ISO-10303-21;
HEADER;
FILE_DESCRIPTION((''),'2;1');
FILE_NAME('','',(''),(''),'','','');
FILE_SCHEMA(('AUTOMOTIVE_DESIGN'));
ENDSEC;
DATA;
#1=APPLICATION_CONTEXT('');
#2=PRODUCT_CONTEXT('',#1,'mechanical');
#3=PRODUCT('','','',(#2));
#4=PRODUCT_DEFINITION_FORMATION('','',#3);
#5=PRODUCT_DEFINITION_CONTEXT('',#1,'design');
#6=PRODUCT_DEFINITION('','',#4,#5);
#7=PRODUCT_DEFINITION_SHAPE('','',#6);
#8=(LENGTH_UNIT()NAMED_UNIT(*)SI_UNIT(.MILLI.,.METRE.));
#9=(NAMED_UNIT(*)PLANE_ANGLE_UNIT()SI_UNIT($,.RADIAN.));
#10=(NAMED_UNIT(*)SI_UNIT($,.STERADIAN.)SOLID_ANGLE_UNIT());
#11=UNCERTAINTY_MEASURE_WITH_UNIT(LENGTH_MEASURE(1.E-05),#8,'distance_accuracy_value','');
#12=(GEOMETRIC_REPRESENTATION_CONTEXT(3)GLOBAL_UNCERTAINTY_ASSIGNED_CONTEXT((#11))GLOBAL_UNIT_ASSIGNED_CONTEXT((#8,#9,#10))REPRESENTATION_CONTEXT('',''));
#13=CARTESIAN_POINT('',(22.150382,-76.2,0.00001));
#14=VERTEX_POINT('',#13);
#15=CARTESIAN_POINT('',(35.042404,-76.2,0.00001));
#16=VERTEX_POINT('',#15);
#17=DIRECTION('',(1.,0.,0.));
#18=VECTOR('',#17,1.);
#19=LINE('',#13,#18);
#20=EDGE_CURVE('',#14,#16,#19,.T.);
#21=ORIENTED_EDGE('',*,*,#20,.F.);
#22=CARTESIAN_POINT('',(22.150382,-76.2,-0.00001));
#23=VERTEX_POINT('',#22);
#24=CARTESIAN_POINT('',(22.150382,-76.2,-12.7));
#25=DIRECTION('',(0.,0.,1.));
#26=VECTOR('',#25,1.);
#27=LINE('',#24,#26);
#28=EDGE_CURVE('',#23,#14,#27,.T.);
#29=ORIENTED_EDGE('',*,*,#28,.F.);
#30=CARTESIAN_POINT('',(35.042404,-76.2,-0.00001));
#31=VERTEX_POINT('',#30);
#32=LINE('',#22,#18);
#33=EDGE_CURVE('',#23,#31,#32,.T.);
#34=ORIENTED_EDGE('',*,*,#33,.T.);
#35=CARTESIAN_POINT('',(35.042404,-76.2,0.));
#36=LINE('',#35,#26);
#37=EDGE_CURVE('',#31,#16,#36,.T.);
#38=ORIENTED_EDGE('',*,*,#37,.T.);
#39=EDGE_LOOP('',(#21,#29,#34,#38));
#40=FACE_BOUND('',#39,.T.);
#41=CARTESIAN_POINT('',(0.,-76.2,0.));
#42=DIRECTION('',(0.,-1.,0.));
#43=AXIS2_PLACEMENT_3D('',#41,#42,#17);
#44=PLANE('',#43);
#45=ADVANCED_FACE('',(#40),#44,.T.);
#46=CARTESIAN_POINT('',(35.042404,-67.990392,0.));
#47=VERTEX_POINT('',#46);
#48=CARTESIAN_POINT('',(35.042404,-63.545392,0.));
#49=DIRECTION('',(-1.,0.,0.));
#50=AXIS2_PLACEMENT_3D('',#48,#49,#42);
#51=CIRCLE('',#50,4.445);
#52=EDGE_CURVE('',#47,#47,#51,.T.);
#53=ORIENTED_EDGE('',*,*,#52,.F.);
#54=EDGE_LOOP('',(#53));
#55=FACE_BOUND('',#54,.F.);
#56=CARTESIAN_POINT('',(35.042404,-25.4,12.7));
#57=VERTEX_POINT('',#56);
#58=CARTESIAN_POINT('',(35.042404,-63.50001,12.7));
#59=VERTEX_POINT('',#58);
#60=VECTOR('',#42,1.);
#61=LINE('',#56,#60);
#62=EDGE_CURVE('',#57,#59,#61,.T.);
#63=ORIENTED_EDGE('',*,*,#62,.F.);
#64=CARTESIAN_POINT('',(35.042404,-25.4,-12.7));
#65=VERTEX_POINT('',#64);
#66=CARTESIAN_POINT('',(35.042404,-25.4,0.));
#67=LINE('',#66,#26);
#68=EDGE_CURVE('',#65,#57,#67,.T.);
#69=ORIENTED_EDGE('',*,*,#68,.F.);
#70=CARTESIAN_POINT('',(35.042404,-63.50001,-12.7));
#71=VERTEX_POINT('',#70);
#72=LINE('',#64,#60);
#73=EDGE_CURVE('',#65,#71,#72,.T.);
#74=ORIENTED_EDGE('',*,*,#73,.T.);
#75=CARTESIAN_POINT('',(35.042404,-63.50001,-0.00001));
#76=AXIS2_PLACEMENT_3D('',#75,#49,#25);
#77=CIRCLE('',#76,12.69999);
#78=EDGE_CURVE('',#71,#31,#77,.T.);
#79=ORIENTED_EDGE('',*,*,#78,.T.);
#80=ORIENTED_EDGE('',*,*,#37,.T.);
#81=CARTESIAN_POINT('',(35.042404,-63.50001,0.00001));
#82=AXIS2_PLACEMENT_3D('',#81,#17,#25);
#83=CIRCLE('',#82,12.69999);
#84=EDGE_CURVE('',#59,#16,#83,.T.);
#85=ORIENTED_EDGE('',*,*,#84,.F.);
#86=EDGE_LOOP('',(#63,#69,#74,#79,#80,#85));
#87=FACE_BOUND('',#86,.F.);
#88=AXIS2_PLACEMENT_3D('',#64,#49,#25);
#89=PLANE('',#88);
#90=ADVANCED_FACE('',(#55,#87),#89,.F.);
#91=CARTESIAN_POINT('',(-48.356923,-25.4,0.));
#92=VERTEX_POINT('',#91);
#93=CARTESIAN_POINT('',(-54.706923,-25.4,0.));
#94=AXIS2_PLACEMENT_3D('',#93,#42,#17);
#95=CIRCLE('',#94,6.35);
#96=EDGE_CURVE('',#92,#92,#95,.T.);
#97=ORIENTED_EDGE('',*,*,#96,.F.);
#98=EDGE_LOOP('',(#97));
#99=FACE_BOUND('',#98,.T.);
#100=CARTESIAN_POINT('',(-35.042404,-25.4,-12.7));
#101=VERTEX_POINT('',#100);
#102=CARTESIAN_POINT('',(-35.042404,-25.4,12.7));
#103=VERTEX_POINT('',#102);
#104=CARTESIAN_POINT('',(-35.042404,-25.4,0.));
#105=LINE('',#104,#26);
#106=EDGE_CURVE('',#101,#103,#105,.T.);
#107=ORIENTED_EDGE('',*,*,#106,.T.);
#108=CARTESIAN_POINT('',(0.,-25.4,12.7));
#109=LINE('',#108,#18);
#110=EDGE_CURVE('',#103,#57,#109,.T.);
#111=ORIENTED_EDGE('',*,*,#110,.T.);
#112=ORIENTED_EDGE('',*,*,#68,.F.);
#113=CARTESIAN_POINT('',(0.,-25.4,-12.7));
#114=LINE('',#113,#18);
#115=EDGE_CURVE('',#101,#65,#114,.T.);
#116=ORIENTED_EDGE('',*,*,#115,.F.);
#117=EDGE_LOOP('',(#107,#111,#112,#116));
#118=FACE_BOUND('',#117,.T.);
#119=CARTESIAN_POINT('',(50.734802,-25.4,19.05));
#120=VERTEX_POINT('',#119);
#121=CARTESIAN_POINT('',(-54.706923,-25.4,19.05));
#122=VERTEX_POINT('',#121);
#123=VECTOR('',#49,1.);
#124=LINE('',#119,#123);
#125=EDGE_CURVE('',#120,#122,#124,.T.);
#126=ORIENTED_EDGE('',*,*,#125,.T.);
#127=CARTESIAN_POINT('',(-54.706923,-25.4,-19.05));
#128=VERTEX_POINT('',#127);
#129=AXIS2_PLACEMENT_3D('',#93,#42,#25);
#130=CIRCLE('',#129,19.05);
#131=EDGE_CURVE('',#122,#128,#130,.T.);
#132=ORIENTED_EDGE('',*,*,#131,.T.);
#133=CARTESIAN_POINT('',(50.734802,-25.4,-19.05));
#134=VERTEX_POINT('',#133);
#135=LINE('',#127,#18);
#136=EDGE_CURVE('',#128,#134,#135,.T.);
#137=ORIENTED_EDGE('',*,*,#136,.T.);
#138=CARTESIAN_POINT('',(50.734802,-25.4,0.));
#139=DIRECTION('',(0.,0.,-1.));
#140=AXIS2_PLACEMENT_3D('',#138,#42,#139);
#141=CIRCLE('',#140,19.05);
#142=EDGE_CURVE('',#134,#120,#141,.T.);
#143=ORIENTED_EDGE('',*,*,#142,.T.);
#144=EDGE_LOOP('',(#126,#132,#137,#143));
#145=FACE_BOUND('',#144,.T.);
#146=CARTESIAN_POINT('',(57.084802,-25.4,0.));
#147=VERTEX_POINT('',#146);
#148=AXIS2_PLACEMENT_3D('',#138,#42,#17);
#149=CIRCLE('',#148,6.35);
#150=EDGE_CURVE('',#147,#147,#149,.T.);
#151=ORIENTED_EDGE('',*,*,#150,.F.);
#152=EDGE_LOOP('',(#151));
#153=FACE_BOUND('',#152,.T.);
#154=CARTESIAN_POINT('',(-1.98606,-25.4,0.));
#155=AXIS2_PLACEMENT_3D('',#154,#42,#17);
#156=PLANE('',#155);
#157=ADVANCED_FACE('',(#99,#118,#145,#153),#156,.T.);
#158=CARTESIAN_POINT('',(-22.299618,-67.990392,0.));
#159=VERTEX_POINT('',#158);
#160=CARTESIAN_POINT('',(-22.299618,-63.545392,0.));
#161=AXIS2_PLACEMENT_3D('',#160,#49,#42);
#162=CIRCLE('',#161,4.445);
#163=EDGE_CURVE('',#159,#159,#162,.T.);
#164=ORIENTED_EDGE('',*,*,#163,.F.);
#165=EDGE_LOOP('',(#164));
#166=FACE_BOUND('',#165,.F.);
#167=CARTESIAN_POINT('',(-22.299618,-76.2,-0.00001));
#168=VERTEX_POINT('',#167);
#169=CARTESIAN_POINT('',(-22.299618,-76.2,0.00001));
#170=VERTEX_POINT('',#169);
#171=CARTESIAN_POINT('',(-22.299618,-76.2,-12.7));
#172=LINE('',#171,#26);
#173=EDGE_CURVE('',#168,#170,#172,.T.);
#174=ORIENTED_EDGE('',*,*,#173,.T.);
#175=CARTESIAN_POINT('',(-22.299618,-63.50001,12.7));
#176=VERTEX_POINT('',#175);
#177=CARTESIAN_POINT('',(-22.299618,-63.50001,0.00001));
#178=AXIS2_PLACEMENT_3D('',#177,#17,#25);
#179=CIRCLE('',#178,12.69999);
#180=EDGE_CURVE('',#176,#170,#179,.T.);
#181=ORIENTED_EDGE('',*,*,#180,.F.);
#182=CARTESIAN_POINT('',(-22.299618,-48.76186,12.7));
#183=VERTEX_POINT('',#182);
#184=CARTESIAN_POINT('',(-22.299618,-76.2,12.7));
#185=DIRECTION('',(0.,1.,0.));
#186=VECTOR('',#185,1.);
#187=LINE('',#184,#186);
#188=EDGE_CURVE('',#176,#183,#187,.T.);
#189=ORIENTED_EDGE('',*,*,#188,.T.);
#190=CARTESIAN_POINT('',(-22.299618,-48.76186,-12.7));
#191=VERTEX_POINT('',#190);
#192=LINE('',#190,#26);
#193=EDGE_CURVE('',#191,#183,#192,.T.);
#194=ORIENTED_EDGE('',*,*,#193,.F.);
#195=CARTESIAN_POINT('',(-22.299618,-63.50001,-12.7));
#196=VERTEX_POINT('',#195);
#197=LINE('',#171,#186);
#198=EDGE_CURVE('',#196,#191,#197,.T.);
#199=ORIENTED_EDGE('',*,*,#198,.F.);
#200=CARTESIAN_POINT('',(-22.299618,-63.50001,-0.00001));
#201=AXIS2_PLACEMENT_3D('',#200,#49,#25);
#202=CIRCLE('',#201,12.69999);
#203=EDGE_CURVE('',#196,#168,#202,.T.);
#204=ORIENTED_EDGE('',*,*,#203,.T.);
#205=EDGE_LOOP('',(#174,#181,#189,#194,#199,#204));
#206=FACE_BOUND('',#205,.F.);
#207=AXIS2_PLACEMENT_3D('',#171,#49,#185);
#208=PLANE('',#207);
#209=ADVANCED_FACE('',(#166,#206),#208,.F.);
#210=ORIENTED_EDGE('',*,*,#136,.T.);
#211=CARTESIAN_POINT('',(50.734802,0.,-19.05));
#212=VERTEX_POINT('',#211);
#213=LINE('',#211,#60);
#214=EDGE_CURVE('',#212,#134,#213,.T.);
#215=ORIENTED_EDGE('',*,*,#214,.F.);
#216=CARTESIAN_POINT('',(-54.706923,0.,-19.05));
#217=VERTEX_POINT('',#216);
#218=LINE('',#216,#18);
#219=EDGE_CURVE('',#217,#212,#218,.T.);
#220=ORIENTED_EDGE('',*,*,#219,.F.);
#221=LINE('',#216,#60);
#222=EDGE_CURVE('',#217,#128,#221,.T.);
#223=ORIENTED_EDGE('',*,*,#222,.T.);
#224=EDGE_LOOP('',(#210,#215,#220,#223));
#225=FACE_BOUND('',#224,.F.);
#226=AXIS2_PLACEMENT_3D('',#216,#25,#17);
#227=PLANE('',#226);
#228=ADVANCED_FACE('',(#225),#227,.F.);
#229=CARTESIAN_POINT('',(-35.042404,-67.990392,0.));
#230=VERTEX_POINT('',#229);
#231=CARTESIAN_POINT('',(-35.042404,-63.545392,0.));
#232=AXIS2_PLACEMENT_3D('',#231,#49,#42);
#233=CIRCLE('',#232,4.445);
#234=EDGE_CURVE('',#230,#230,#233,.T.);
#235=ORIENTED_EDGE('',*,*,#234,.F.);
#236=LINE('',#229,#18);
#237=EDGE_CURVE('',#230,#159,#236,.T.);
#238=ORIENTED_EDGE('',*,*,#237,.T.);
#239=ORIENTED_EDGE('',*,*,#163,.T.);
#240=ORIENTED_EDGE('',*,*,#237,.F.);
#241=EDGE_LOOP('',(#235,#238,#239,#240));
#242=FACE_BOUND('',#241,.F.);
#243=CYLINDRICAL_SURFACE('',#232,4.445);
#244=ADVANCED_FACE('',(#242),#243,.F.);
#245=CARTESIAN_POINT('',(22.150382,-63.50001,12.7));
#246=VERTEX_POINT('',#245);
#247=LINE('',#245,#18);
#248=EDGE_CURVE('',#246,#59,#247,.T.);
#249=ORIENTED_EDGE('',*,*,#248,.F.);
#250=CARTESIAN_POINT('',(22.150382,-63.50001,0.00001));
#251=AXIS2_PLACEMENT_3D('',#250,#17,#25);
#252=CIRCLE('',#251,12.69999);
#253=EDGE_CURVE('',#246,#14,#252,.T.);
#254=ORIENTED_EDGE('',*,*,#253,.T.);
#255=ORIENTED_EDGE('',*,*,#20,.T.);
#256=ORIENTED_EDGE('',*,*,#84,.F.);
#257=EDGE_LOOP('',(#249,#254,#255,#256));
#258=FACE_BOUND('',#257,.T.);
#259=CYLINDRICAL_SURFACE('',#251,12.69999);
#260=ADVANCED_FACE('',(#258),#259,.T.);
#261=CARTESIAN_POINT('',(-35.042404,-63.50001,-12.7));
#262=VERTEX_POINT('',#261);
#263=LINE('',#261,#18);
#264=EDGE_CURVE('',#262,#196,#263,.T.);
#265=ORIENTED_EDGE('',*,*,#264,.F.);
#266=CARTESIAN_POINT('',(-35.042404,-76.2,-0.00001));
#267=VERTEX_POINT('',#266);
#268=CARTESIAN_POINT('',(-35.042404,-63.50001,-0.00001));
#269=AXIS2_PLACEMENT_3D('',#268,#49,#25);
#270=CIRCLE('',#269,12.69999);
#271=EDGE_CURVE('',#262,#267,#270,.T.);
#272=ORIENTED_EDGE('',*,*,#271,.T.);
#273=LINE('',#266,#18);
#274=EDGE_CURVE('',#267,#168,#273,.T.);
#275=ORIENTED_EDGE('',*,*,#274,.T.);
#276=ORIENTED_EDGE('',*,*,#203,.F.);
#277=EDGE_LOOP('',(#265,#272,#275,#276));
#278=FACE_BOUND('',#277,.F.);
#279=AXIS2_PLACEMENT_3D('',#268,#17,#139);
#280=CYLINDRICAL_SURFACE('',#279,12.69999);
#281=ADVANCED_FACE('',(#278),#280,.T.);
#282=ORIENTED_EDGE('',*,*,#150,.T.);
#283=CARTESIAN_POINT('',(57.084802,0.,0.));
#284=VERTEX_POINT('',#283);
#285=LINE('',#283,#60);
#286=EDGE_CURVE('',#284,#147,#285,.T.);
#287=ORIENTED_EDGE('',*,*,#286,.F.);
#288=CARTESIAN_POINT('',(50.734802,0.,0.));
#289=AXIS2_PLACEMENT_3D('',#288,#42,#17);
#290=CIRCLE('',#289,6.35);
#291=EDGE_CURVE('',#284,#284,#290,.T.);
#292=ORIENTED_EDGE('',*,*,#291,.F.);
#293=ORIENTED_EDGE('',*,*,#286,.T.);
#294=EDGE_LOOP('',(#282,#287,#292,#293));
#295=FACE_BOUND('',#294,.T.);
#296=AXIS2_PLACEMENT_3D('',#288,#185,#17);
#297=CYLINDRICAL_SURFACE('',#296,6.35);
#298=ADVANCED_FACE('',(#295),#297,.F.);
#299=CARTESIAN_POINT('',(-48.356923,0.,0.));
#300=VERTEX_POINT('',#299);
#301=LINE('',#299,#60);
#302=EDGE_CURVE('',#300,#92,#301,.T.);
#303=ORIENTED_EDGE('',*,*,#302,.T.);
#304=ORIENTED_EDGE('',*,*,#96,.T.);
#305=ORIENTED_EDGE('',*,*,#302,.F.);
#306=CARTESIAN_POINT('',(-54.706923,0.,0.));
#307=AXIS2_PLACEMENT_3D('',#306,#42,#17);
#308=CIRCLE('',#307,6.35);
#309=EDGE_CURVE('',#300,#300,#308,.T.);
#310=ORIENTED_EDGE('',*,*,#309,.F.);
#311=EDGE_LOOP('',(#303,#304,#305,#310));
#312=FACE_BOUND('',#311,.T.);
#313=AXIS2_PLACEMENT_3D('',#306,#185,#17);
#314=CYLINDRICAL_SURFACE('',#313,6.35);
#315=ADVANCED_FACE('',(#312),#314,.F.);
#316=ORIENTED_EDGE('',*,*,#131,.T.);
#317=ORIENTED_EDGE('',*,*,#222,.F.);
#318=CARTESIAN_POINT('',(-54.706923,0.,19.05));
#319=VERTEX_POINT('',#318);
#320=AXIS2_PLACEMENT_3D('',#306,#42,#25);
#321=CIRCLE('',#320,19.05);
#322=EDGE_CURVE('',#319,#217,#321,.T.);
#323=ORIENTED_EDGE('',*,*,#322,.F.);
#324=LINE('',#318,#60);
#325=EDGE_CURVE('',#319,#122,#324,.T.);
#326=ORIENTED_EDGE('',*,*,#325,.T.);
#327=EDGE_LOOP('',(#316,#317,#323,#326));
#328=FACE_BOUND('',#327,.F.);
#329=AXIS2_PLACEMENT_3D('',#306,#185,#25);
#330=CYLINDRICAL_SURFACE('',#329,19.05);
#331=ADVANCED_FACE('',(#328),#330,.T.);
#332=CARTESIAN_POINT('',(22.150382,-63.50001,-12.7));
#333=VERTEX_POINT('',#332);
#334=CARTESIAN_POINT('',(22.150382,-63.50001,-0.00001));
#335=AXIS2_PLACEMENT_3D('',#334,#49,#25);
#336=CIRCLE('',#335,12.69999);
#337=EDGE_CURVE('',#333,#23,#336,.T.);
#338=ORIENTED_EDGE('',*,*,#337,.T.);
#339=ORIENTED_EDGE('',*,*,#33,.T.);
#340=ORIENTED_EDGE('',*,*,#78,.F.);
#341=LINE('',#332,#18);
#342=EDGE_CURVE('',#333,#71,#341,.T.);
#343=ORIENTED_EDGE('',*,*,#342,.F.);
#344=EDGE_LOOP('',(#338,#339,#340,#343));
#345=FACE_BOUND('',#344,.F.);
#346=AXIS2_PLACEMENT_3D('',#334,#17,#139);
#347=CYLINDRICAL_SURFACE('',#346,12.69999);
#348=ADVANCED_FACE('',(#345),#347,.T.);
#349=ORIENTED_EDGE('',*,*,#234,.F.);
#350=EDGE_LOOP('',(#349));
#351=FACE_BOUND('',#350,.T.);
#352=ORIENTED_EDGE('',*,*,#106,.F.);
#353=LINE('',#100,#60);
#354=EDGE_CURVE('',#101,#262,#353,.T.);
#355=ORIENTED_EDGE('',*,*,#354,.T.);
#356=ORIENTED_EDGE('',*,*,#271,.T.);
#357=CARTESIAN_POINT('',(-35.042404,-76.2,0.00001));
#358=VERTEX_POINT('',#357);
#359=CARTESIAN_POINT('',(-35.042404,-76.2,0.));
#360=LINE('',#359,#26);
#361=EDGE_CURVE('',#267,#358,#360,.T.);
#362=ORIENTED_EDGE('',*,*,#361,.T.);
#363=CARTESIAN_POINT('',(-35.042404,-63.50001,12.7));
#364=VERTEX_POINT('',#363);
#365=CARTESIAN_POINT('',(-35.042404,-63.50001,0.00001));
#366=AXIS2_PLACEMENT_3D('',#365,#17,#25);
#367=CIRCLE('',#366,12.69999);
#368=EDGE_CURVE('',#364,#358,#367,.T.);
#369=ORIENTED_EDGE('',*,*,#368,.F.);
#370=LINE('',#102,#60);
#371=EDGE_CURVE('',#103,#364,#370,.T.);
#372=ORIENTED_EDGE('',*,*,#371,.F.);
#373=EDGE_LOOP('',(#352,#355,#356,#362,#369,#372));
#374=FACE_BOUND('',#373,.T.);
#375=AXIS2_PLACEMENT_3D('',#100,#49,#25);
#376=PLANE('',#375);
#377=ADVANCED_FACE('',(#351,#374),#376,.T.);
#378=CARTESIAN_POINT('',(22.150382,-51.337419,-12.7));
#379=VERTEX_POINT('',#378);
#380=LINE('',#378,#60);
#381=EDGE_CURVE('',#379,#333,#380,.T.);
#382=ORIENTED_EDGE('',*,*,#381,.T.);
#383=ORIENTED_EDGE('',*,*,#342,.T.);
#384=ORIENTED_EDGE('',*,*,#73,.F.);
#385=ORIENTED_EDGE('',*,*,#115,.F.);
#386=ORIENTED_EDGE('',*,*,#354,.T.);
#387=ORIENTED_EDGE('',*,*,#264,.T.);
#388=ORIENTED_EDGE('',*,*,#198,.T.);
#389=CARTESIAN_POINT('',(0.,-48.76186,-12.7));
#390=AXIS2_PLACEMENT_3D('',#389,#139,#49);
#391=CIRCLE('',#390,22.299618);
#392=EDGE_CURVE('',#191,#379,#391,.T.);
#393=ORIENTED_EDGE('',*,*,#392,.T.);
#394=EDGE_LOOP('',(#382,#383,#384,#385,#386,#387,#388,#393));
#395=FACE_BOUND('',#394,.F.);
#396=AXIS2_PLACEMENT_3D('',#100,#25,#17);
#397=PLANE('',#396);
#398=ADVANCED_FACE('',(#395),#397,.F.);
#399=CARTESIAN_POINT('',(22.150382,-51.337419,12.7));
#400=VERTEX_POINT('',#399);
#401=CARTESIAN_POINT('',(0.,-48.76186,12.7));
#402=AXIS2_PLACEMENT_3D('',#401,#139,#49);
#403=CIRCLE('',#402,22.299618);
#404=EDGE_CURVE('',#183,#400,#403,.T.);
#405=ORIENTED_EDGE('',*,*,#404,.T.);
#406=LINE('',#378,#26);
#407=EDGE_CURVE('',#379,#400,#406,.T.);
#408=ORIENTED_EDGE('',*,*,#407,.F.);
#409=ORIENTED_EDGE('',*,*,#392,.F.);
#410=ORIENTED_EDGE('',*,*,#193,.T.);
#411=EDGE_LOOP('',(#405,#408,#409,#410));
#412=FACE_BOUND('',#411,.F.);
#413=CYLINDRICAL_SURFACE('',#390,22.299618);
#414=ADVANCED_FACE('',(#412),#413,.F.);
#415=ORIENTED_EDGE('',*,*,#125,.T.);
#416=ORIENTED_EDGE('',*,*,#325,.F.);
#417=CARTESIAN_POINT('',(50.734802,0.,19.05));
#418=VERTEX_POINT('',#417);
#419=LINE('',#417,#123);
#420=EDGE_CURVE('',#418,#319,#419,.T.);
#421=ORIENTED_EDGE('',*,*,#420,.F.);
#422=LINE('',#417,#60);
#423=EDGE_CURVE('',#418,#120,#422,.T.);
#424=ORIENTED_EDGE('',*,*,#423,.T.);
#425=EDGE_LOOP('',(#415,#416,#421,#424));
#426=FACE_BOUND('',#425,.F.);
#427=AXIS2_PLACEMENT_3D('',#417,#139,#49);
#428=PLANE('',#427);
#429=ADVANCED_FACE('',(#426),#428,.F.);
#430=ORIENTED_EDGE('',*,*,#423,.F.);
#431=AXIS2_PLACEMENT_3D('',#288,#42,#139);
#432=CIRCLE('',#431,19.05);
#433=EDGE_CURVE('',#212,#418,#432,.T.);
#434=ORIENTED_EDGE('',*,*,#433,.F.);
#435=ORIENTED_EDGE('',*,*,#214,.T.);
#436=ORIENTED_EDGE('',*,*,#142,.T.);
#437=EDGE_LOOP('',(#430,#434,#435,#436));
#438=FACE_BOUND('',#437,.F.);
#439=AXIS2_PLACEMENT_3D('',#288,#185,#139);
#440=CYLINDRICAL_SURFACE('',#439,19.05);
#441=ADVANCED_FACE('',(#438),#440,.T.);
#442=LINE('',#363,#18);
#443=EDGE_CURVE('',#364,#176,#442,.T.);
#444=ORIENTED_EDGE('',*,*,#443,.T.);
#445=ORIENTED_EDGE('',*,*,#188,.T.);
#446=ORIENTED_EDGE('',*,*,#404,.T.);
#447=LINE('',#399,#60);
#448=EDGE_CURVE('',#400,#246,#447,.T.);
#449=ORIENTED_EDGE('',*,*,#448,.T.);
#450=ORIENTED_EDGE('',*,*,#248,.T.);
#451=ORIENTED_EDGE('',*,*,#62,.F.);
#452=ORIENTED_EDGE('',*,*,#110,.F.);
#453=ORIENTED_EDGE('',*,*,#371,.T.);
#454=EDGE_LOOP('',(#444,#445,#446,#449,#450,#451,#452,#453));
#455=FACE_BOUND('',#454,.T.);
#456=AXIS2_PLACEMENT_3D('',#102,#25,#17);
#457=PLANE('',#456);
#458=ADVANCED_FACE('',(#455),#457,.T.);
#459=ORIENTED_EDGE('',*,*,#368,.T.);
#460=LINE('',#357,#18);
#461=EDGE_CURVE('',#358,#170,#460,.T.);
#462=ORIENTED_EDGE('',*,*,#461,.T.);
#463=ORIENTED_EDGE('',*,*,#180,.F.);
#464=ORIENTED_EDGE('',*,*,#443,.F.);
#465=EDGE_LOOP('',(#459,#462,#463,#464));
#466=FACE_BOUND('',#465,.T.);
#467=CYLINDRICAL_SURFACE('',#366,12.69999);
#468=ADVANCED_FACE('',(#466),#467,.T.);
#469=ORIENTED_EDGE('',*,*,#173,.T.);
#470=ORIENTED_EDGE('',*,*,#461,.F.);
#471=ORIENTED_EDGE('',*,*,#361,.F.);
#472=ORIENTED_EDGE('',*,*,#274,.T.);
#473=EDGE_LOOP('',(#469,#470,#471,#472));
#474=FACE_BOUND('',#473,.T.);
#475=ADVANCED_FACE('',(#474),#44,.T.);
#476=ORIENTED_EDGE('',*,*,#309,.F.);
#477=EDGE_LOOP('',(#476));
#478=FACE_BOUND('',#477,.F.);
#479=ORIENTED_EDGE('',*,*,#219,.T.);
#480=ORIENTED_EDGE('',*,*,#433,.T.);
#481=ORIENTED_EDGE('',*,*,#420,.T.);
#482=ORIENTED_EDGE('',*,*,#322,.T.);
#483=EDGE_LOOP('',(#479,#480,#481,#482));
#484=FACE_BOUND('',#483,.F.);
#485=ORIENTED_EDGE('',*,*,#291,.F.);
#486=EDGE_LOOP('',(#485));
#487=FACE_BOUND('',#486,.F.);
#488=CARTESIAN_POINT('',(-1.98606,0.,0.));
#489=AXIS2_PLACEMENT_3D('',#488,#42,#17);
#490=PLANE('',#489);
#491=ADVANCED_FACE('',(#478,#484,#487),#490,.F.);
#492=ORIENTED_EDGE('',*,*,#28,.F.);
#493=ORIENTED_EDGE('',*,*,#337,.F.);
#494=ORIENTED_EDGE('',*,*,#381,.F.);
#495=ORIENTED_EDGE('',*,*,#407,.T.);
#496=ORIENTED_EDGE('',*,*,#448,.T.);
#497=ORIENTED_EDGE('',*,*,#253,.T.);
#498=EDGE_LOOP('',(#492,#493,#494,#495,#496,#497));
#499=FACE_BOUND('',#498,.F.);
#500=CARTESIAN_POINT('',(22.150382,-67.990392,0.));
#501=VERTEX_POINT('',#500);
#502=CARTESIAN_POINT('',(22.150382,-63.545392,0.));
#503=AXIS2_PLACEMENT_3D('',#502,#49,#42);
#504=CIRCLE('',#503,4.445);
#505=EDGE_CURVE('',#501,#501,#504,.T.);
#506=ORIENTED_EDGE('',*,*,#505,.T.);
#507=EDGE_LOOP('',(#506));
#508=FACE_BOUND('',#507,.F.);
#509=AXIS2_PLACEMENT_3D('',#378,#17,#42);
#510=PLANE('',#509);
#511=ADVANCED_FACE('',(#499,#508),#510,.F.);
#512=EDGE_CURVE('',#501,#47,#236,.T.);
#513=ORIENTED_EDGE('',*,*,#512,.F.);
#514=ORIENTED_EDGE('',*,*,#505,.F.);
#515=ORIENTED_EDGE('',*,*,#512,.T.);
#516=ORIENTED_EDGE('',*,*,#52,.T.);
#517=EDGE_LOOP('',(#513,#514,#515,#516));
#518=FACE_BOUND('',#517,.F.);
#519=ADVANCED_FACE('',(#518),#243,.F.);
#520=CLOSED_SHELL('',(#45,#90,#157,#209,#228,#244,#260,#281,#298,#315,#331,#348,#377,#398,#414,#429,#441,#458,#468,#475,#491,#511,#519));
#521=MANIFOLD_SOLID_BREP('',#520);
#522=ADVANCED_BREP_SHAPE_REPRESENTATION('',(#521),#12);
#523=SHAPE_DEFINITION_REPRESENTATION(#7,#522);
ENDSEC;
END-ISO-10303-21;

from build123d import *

# Parameters (mm, degrees)
F0_R     = 6.35
F1_DEPTH = 25.4
F2_W     = 70.0848072124
F2_H     = 25.4
F3_DEPTH = 50.8
F5_DEPTH = 25.4
F6_R     = 4.445
F7_DEPTH = 127
F8_R     = 12.69999


# Not quite as in the source:
# - a fillet or chamfer is up to 0.001 mm smaller than in the source, because OpenCascade refuses the exact size


with BuildPart() as f1:
    # F0 (on Front) → F1 (new body)
    with BuildSketch(Plane.XZ):
        with BuildLine():
            Line((-54.7069231111, -19.05), (50.7348023818, -19.05))
            ThreePointArc((50.7348023818, -19.05), (69.7848023818, 0), (50.7348023818, 19.05))
            Line((50.7348023818, 19.05), (-54.7069231111, 19.05))
            ThreePointArc((-54.7069231111, 19.05), (-73.7569231111, 0), (-54.7069231111, -19.05))
        make_face()
        with Locations((-54.7069231111, 0)):
            Circle(F0_R, mode=Mode.SUBTRACT)
        with Locations((50.7348023818, 0)):
            Circle(F0_R, mode=Mode.SUBTRACT)
    extrude(amount=F1_DEPTH)

    # F2 (on face) → F3 (join)
    with BuildSketch(Plane.XZ.offset(25.4)):
        Rectangle(F2_W, F2_H)
    extrude(amount=F3_DEPTH)

    # F4 (on face) → F5 (cut)
    with BuildSketch(Plane(origin=(0, 0, -12.7), x_dir=(1, 0, 0), z_dir=(0, 0, -1))):
        with BuildLine():
            Line((22.1503823996, 76.2), (-22.2996176004, 76.2))
            Line((-22.2996176004, 76.2), (-22.2996176004, 48.7618595362))
            ThreePointArc((-22.2996176004, 48.7618595362), (1.2899395164, 26.4995819984), (22.1503823996, 51.3374186365))
            Line((22.1503823996, 51.3374186365), (22.1503823996, 76.2))
        make_face()
    extrude(amount=-F5_DEPTH, mode=Mode.SUBTRACT)

    # F6 (on face) → F7 (cut)
    with BuildSketch(Plane(origin=(-35.0424036062, 0, 0), x_dir=(0, -1, 0), z_dir=(-1, 0, 0))):
        with Locations((63.5453920611, 0)):
            Circle(F6_R)
    extrude(amount=-F7_DEPTH, mode=Mode.SUBTRACT)

    # F8 (radius 12.7 in the source; OpenCascade refuses exactly that, so slightly less here)
    f8_edges = [f1.edges().sort_by_distance(p)[0] for p in [
        (-28.671011, -76.2, 12.7),
        (-28.671011, -76.2, -12.7),
        (28.596393, -76.2, 12.7),
        (28.596393, -76.2, -12.7),
    ]]
    fillet(f8_edges, radius=F8_R)


solid = f1.part
